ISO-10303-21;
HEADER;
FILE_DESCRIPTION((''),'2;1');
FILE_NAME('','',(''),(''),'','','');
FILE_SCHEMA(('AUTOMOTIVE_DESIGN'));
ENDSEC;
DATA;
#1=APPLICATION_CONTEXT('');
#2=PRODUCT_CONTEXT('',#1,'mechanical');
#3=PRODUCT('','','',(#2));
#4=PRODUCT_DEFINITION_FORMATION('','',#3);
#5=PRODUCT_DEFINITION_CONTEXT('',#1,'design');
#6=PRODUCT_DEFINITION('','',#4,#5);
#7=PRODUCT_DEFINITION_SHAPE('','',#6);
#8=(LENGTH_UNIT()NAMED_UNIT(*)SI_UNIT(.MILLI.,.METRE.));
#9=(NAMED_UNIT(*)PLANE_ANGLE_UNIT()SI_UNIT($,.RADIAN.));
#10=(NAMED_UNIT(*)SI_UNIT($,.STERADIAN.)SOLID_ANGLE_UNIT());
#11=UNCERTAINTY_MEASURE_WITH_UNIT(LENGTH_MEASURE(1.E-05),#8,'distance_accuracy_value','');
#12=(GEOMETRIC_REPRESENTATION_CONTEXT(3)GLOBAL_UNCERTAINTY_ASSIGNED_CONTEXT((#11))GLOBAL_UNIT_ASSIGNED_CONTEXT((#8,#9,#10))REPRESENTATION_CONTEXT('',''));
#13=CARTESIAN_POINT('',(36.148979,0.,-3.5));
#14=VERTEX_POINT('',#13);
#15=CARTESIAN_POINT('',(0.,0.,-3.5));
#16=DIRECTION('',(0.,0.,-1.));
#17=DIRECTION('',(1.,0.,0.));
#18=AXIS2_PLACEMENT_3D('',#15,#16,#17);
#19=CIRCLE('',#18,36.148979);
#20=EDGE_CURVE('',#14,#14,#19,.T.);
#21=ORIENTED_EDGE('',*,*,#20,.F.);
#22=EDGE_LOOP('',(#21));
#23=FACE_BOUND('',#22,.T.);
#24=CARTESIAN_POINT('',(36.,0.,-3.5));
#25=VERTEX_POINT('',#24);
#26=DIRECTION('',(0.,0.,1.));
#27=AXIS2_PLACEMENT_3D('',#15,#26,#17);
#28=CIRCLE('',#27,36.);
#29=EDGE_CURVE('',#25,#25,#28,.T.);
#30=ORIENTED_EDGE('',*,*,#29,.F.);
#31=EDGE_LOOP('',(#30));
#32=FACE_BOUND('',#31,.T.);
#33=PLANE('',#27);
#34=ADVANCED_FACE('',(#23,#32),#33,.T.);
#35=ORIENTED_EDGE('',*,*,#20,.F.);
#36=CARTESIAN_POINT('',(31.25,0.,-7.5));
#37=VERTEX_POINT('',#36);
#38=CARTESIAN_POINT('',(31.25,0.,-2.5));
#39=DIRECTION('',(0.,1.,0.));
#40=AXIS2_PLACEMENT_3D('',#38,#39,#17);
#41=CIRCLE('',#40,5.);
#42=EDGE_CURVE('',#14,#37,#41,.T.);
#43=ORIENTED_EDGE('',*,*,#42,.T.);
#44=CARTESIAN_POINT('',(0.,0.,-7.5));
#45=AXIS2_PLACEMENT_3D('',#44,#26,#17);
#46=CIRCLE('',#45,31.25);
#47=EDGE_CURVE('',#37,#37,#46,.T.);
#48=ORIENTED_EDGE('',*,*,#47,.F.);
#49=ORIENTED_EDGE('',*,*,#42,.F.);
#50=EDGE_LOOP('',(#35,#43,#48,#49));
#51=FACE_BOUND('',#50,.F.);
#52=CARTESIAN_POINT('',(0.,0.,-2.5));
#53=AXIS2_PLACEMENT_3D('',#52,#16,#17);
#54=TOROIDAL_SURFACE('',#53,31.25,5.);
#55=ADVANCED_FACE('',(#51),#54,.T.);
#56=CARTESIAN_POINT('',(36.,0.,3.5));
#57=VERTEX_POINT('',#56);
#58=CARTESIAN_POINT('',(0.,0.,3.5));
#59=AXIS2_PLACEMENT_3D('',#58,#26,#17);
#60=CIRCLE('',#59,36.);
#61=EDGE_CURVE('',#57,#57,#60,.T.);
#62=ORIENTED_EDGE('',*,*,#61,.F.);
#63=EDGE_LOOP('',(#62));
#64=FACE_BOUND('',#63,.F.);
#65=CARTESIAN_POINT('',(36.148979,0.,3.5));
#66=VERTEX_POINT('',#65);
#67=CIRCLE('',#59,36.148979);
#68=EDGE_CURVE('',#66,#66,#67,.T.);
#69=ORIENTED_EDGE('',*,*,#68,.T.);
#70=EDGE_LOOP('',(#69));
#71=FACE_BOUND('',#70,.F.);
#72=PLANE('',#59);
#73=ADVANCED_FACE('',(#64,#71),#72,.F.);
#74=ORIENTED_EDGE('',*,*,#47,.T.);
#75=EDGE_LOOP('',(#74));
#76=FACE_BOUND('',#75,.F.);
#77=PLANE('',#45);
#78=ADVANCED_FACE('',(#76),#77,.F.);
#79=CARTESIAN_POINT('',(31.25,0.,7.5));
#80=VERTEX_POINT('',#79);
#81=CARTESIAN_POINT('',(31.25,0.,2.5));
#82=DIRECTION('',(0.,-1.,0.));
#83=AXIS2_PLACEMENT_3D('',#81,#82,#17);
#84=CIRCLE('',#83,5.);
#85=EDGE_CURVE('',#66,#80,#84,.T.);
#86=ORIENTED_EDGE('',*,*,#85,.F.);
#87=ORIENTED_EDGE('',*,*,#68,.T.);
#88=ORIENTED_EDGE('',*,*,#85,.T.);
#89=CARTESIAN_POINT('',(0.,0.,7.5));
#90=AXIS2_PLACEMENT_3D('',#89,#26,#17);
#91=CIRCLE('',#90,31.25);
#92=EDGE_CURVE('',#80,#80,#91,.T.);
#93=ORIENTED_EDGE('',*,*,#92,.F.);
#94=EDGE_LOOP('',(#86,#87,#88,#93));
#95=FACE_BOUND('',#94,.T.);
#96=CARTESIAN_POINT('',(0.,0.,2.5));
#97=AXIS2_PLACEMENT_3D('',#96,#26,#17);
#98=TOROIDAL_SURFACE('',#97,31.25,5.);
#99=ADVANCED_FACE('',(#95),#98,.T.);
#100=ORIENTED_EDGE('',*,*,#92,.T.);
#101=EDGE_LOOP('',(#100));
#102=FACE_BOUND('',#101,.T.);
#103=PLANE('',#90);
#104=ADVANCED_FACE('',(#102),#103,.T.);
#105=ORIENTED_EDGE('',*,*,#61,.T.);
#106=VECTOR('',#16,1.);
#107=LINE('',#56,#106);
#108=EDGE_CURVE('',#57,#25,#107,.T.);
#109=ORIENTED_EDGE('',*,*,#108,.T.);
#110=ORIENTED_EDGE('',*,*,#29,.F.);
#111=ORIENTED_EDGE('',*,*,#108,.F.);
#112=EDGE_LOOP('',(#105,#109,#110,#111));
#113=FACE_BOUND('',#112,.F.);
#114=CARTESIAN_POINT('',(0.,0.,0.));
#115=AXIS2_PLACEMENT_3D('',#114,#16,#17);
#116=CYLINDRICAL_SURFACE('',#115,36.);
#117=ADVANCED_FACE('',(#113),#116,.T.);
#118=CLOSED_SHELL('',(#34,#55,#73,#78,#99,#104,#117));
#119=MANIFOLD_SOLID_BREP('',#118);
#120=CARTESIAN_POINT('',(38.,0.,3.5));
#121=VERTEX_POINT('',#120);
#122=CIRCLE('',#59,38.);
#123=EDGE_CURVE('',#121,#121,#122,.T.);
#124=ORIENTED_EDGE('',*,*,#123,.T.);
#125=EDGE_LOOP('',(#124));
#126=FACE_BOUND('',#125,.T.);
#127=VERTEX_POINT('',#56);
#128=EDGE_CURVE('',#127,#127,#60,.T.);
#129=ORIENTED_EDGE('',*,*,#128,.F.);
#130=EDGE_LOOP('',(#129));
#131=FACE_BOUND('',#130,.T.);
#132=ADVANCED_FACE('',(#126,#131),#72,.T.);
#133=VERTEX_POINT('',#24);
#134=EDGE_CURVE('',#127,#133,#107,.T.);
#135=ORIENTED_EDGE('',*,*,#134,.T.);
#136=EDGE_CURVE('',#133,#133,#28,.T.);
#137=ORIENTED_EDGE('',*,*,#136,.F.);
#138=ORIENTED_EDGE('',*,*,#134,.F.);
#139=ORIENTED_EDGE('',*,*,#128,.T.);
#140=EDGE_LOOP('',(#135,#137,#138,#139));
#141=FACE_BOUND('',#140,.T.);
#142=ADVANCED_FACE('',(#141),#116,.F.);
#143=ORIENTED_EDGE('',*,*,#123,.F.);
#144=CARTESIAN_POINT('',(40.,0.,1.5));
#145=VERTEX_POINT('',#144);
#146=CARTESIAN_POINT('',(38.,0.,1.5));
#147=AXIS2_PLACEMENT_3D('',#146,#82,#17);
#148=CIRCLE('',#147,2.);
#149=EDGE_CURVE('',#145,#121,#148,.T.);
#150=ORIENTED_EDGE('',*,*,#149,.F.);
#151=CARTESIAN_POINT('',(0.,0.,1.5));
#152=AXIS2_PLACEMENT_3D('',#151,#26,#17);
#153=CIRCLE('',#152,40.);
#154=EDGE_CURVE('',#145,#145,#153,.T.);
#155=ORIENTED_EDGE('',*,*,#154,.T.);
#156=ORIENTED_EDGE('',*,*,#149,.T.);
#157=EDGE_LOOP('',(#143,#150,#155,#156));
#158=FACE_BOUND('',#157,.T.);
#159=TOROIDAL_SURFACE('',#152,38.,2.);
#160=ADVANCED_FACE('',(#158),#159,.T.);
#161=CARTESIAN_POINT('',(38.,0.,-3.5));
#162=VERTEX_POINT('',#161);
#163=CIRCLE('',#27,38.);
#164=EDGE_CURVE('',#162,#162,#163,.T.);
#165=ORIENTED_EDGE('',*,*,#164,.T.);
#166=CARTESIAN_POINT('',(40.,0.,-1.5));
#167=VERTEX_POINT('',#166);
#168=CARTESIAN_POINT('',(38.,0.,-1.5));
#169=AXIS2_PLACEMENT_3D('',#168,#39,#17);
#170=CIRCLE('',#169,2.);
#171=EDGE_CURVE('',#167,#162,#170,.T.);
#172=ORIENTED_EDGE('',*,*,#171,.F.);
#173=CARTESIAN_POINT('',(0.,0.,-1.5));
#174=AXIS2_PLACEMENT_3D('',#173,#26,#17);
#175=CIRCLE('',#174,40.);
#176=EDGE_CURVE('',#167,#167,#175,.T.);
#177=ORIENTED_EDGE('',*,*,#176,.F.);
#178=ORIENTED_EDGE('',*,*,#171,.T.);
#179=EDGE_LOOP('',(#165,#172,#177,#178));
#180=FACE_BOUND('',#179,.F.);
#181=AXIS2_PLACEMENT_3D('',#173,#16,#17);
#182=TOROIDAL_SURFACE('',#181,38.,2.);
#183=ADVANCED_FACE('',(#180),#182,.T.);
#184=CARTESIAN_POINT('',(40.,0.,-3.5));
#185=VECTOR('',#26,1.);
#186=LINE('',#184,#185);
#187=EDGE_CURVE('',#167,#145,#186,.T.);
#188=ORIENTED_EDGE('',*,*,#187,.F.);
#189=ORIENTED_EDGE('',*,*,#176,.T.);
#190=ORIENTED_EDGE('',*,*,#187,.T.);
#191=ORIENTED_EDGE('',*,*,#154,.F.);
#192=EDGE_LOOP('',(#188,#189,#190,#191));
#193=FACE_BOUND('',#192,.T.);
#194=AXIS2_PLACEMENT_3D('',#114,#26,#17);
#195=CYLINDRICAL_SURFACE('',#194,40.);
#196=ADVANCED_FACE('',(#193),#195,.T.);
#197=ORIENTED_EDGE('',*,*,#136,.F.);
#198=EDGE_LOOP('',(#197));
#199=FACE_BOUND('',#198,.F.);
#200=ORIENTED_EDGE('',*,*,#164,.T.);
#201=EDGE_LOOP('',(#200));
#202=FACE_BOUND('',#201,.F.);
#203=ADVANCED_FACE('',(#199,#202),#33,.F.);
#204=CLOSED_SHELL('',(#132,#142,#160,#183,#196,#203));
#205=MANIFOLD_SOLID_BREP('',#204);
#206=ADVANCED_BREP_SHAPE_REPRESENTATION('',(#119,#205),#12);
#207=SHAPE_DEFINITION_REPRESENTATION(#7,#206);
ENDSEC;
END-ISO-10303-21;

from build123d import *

# Parameters (mm, degrees)
F2_R     = 40
F2_R_2   = 36
F3_DEPTH = 3.5
F4_R     = 36.25
F5_DEPTH = 7.5
F6_R     = 5
F9_R     = 2


with BuildPart() as f3:
    # F2 (on Top) → F3 (new body, symmetric)
    with BuildSketch(Plane.XY):
        Circle(F2_R)
        Circle(F2_R_2, mode=Mode.SUBTRACT)
    extrude(amount=F3_DEPTH, both=True)


with BuildPart() as f5:
    # F4 (on Top) → F5 (new body, symmetric)
    with BuildSketch(Plane.XY):
        Circle(F4_R)
    extrude(amount=F5_DEPTH, both=True)

    # F6
    f6_edges = [f5.edges().sort_by_distance(p)[0] for p in [
        (-36.25, 0, 7.5),
        (-36.25, 0, -7.5),
    ]]
    fillet(f6_edges, radius=F6_R)


with BuildPart() as f7_1:
    # F7: copy of F3
    add(f3.part)


with BuildPart() as f5_1:
    add(f5.part)

    # F8: cut F7_1
    add(f7_1.part, mode=Mode.SUBTRACT)


with BuildPart() as f3_1:
    add(f3.part)

    # F9
    f9_edges = [f3_1.edges().sort_by_distance(p)[0] for p in [
        (-40, 0, -3.5),
        (40, 0, 0),
        (-40, 0, 3.5),
    ]]
    fillet(f9_edges, radius=F9_R)


solid = Compound([f5_1.part, f3_1.part])
